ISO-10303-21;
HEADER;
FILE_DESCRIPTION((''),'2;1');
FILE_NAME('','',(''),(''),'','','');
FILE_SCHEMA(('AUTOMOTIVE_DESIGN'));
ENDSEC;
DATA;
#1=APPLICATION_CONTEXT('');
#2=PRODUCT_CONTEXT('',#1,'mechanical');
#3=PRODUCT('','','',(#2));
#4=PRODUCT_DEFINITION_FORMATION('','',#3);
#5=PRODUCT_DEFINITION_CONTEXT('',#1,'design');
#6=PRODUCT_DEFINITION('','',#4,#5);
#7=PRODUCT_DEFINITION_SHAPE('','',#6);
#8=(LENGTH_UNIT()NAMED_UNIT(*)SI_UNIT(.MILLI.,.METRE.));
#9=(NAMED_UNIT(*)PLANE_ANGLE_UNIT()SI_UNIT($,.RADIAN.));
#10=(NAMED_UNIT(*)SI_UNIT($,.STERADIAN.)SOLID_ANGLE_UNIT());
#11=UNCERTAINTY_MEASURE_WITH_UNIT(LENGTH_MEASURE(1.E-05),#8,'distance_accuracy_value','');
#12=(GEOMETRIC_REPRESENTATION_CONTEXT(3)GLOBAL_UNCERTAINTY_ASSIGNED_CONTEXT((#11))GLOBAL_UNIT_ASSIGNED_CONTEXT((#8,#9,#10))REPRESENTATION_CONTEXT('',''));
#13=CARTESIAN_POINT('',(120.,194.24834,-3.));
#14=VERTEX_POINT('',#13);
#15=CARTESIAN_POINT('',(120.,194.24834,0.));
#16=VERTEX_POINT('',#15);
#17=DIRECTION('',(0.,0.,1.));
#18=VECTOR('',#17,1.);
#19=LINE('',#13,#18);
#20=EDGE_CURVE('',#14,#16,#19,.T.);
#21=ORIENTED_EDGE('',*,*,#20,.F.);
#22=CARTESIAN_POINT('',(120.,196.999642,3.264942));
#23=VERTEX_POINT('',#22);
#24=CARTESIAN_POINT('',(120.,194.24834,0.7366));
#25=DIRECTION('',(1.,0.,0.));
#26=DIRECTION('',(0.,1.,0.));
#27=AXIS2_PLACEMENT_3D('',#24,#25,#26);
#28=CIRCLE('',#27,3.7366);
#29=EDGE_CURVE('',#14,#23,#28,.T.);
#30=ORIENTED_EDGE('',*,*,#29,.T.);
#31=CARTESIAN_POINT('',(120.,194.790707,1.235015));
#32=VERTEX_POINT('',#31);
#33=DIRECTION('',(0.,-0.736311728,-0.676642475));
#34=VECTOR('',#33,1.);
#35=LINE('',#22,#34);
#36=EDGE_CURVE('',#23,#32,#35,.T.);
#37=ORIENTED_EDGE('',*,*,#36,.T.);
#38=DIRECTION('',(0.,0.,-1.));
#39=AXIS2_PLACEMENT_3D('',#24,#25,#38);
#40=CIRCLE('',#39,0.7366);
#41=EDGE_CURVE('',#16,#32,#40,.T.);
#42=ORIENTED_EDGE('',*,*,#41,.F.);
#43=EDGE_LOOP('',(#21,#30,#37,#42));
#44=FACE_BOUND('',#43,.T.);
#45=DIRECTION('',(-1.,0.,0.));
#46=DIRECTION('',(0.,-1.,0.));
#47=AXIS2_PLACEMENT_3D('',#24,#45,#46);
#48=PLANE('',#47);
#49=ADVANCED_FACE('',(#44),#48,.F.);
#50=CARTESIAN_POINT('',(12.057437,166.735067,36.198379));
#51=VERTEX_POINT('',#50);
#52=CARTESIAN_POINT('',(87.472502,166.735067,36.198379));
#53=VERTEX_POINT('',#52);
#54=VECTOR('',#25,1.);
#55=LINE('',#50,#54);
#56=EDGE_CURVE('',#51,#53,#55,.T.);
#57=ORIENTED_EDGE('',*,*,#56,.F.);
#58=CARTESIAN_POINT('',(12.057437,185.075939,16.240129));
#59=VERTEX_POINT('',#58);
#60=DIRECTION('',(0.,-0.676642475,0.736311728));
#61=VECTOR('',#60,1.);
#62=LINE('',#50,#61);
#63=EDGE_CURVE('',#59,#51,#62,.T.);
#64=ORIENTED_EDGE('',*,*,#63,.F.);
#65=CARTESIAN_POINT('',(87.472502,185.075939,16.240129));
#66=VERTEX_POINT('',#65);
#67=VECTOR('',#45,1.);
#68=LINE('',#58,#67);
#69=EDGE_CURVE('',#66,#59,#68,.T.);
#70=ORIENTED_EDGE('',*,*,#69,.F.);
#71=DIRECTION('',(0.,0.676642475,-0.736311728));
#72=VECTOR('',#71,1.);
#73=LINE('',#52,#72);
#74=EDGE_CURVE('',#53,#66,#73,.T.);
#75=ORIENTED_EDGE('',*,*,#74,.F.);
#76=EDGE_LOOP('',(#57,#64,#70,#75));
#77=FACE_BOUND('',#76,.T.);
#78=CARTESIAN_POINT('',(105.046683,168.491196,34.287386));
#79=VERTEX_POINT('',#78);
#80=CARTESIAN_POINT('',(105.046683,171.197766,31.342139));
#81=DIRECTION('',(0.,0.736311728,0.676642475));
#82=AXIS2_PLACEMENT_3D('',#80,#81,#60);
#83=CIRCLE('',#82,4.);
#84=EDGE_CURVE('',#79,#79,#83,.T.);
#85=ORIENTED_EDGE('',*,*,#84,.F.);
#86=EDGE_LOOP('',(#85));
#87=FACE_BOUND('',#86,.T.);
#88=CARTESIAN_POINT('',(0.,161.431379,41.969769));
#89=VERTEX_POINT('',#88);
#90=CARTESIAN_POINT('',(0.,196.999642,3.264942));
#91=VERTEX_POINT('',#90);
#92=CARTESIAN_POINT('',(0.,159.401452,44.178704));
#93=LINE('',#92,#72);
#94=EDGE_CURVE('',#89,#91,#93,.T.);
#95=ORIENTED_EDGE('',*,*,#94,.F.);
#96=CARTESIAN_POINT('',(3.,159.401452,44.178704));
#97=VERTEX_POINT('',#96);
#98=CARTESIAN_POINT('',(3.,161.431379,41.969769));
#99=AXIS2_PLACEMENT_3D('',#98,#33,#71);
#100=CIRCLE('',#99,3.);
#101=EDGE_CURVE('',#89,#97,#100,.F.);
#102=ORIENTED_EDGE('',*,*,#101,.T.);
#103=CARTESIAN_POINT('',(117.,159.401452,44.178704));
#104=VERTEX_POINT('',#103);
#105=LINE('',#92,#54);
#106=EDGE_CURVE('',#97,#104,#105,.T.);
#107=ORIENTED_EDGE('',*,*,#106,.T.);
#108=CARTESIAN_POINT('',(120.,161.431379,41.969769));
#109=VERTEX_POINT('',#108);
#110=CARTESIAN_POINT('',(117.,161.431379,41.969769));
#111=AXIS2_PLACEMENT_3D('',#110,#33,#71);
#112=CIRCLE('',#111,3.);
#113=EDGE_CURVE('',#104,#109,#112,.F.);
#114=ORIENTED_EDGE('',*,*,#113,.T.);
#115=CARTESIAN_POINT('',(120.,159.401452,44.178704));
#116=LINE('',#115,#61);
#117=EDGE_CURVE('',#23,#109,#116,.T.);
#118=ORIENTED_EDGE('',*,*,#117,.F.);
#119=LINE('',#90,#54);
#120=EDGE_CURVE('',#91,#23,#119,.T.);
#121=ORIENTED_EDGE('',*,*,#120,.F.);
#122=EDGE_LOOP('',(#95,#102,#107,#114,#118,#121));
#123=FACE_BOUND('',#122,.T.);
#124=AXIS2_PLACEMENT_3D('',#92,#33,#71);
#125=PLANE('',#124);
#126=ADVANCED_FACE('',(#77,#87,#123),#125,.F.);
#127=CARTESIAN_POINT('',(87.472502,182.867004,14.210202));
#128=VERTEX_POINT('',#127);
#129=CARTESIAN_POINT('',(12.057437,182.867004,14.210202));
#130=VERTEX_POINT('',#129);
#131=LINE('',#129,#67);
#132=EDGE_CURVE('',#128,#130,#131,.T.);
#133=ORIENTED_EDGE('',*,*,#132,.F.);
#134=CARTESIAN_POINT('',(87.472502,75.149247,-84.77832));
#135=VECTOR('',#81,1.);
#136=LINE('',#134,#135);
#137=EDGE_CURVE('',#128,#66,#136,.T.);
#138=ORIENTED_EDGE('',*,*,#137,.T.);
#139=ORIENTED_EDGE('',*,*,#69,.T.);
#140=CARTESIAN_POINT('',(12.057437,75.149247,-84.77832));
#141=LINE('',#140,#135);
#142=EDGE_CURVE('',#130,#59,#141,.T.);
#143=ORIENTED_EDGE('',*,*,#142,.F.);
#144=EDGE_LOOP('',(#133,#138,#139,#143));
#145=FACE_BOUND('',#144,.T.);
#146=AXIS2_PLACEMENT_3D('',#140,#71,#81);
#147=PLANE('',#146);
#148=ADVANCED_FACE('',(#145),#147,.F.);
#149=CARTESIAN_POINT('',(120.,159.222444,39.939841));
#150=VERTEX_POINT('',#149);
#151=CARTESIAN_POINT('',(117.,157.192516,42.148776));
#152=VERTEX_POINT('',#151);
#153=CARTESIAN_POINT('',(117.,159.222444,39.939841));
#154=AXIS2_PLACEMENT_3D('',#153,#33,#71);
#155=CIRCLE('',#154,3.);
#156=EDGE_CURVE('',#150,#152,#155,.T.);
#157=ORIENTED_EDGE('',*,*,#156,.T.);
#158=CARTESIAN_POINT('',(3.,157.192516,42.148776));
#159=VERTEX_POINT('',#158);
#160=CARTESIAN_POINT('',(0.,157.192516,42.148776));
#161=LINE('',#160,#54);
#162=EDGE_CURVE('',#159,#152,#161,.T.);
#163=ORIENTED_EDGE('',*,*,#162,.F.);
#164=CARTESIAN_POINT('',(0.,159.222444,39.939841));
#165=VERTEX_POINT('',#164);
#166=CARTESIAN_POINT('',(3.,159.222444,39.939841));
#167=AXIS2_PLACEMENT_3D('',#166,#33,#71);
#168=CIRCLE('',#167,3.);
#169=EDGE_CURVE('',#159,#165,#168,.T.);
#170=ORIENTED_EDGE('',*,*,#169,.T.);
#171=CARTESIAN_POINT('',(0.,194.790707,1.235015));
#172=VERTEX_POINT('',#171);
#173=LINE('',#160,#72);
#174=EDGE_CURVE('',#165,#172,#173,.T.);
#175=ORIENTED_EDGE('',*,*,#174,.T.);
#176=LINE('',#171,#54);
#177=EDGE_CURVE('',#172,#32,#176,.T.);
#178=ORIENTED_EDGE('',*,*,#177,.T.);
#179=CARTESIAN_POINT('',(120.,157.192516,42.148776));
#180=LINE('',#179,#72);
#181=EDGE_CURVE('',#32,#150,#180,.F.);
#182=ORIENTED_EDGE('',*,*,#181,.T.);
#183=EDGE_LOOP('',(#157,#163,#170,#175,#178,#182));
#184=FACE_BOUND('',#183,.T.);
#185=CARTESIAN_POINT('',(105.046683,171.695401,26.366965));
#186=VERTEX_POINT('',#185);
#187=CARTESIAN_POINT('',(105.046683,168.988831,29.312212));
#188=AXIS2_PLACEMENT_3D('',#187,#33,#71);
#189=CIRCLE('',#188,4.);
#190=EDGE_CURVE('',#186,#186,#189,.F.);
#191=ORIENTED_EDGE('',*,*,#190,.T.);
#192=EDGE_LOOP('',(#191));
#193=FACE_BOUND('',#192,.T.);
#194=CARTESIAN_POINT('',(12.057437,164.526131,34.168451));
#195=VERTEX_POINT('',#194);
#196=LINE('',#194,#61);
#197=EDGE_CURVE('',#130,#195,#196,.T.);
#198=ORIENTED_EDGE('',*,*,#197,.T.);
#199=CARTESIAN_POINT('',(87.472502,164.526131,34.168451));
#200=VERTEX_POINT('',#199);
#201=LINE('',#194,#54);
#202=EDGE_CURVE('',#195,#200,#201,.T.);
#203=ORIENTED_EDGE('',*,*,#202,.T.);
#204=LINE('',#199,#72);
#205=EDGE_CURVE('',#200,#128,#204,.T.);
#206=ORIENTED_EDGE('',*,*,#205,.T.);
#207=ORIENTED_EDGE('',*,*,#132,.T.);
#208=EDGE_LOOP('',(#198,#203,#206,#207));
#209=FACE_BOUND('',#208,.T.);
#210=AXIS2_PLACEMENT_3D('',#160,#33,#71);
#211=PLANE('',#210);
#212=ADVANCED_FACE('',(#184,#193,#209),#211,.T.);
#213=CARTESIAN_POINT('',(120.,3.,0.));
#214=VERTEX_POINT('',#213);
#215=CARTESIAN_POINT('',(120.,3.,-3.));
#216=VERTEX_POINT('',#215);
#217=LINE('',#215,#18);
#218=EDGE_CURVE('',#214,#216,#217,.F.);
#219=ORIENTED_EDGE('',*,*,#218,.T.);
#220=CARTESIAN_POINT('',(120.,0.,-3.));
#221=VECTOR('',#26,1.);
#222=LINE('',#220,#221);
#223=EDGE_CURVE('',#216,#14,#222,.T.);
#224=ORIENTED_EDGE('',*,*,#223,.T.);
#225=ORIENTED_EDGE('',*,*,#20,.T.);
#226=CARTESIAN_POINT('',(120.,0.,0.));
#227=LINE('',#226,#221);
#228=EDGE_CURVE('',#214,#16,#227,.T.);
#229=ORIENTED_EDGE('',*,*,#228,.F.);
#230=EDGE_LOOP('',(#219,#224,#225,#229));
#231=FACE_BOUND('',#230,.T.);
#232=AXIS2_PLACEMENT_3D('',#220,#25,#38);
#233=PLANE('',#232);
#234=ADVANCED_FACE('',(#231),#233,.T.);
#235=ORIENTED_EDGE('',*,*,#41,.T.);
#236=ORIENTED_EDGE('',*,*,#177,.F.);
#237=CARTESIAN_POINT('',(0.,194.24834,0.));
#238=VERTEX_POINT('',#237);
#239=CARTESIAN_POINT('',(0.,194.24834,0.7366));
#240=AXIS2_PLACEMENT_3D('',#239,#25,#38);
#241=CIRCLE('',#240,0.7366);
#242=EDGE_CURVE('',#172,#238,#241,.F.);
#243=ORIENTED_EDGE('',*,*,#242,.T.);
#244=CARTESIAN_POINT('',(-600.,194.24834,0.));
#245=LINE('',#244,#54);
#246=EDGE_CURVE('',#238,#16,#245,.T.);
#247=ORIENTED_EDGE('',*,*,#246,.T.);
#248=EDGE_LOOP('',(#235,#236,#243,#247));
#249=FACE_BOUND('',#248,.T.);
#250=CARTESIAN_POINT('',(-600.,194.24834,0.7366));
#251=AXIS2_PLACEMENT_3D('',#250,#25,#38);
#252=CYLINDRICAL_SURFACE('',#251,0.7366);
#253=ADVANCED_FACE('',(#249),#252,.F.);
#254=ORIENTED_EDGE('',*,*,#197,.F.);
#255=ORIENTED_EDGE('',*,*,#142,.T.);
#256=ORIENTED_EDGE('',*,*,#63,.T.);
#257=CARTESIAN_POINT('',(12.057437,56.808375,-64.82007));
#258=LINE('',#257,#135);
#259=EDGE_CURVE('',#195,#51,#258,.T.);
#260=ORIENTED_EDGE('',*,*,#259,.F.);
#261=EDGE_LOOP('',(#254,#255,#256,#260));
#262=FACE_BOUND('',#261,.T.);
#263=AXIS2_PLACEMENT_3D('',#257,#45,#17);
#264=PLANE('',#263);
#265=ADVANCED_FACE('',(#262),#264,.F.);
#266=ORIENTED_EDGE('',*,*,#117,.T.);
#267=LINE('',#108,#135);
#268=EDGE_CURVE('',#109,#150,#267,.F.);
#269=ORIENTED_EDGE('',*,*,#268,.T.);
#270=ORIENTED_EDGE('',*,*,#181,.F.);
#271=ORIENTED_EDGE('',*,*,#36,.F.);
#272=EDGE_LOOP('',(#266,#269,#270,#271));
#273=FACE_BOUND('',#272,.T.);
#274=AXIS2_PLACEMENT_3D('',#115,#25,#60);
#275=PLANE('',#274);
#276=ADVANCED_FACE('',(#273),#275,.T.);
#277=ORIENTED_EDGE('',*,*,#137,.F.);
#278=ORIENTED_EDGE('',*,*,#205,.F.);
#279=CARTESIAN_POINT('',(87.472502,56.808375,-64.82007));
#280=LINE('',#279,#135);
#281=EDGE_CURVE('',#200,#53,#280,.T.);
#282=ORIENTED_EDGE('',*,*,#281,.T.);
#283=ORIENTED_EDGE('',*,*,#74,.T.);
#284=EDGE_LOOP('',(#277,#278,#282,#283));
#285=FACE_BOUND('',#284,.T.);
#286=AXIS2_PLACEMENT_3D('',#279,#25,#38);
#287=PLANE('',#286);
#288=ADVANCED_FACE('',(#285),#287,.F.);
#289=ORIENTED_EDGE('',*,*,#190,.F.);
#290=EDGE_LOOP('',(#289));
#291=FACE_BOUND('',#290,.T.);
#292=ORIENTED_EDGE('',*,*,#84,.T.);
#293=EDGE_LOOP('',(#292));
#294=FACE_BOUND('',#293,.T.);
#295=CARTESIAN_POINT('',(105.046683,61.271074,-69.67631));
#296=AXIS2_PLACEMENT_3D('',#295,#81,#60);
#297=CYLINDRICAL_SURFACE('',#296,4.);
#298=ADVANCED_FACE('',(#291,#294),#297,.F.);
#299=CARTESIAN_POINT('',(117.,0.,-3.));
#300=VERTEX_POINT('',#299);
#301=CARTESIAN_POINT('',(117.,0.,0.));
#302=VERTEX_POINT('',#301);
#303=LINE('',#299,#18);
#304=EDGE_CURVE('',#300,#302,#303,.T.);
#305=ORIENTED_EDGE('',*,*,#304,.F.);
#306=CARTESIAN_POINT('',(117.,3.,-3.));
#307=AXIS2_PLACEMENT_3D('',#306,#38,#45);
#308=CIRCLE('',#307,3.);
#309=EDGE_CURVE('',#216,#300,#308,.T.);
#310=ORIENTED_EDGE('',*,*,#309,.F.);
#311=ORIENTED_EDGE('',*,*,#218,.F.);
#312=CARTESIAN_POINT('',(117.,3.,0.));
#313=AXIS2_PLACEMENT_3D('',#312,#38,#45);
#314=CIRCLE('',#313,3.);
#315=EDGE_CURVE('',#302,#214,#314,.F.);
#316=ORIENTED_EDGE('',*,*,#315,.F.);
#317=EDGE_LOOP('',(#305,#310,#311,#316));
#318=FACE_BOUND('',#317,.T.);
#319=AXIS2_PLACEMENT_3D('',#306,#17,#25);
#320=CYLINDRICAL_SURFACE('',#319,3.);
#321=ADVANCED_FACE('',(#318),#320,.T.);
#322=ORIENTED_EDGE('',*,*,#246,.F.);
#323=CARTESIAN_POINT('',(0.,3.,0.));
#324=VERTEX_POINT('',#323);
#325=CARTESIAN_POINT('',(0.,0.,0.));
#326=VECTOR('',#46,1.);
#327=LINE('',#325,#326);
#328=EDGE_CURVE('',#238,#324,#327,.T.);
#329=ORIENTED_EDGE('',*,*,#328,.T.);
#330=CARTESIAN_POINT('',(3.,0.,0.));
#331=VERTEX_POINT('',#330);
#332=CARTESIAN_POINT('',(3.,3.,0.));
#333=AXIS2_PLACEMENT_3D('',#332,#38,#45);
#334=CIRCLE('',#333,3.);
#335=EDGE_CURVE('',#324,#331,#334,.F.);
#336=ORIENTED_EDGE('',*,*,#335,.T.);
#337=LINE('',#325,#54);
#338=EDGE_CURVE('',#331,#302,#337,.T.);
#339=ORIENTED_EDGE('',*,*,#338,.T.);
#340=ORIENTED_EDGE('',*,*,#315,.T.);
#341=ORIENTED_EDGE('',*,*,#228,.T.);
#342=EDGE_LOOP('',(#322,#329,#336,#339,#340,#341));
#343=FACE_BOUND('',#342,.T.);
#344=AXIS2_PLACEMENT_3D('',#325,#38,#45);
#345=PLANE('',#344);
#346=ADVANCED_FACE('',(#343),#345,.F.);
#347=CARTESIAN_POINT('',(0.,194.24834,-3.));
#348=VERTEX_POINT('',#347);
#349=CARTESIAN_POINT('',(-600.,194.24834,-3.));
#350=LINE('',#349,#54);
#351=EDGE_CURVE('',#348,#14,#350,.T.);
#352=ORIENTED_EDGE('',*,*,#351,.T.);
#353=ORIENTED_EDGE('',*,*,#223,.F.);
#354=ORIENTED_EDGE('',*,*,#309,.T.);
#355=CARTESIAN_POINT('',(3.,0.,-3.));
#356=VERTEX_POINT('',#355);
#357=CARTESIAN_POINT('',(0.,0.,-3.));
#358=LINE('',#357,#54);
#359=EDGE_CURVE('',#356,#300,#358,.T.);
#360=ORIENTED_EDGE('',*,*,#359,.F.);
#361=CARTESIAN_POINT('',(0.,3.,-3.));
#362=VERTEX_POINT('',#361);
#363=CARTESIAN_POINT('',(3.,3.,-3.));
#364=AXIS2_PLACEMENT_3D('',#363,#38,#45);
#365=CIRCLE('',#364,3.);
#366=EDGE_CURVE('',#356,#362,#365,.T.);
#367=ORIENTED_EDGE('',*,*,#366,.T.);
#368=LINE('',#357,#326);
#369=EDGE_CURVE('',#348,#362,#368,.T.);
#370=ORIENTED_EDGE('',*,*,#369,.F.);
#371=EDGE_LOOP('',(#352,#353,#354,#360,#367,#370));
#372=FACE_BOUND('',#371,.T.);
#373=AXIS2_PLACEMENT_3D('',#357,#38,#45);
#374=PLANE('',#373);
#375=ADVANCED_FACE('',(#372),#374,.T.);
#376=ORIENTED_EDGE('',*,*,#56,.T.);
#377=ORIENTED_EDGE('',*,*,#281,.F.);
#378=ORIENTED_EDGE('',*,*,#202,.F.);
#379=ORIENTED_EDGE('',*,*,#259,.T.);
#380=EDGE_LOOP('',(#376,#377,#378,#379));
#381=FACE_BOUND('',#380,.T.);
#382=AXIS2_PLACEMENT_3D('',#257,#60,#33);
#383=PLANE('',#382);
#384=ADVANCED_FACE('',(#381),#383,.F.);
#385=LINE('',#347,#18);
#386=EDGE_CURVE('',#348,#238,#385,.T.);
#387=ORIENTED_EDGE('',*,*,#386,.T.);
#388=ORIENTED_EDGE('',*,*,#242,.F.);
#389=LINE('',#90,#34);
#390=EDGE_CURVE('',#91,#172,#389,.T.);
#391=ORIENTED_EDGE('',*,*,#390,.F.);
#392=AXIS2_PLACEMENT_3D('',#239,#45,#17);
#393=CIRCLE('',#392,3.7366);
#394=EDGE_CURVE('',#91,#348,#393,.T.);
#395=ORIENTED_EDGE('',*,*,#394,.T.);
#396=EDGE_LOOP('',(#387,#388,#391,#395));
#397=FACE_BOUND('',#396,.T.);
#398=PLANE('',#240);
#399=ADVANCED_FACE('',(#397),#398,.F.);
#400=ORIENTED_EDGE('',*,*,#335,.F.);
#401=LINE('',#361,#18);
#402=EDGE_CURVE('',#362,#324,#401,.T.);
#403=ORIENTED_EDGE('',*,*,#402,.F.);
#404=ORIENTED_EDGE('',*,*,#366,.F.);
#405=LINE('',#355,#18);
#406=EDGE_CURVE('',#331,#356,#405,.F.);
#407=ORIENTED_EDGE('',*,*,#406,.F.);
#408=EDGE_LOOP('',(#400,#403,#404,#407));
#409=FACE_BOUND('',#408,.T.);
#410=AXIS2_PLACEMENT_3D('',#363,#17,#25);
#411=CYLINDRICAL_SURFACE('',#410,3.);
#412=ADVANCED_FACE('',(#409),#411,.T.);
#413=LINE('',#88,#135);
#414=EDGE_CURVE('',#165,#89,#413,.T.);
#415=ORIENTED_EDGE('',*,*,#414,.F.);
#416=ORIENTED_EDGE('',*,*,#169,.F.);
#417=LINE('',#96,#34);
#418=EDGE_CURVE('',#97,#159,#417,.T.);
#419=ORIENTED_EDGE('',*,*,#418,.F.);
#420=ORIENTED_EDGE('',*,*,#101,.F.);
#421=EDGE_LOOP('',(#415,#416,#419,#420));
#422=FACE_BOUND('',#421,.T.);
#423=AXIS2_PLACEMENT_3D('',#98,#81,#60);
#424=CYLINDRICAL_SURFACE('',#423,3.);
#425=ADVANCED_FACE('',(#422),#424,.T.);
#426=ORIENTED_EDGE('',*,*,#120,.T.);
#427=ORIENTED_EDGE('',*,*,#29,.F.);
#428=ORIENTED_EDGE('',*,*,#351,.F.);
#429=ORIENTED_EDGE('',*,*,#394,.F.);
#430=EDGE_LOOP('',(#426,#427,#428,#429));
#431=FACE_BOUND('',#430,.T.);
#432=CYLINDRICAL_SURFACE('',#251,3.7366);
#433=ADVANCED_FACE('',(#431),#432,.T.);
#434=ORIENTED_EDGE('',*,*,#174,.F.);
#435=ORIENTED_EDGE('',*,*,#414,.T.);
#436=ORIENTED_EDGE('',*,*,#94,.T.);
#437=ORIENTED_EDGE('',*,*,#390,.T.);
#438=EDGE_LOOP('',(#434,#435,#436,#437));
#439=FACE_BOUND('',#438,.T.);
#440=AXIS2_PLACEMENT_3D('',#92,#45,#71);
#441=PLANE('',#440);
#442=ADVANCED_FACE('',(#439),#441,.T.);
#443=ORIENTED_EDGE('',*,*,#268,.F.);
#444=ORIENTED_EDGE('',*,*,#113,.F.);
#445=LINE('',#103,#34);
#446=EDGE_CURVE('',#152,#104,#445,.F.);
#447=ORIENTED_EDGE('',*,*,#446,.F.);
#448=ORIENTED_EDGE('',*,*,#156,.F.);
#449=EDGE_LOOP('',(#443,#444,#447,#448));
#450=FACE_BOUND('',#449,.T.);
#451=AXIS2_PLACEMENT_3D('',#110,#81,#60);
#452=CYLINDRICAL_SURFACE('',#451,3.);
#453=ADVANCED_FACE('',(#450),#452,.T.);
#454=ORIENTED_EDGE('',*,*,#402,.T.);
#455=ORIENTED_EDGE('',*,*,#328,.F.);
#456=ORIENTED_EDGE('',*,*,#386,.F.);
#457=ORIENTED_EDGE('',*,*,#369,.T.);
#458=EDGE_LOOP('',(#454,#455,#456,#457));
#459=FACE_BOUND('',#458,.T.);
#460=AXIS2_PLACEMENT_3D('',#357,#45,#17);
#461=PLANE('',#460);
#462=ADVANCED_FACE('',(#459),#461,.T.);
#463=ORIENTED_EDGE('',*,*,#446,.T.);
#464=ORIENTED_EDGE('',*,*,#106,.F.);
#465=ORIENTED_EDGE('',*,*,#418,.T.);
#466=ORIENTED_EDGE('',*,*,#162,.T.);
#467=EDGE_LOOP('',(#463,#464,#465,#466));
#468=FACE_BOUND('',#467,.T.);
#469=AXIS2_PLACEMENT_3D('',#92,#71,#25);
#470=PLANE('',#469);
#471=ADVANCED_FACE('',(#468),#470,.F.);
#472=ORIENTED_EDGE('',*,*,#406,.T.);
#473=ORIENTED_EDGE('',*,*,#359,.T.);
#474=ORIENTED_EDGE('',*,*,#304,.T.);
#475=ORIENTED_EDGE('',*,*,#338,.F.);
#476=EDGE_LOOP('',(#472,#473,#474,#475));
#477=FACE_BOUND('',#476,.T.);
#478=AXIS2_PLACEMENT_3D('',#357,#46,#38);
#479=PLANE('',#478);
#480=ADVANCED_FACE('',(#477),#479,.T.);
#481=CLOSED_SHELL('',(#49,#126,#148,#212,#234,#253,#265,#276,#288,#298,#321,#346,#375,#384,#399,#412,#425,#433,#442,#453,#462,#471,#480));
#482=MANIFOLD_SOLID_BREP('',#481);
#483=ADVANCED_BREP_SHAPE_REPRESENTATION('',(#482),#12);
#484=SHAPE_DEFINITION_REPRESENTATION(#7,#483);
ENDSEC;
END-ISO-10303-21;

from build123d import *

# Parameters (mm, degrees)
SZKIC1_W                   = 120
SZKIC1_H                   = 200
ODGI_CIE_BAZOWE1_DEPTH     = 3
ODGI_CIE_DOOKOLNE1_DEPTH   = 120
ODGI_CIE_DOOKOLNE1_2_DEPTH = 120
WYTNIJ_WYCI_GNI_CIE1_REACH = 193.554
SZKIC7_R                   = 4
SZKIC7_W                   = 75.41506457
SZKIC7_H                   = 27.105706619
ZAOKR_GLENIE1_R            = 3


# Read off the part's stored shape, not the designer's step: Odgięcie dookolne1
# Sheet-metal steps are written as plain solids
with BuildPart() as part:
    # Szkic1 → Odgięcie bazowe1 (new body)
    with BuildSketch(Plane.XY):
        with Locations((60, 100)):
            Rectangle(SZKIC1_W, SZKIC1_H)
    extrude(amount=-ODGI_CIE_BAZOWE1_DEPTH)

    # Odgięcie dookolne1 outline → Odgięcie dookolne1 (cut)
    with BuildSketch(Plane.YZ):
        with BuildLine():
            Line((200, 0), (197.911617043, 0))
            ThreePointArc((197.911617043, 0), (196.615806823, -2.154295979), (194.248339822, -3))
            Line((194.248339822, -3), (200, -3))
            Line((200, -3), (200, 0))
        make_face()
    extrude(amount=ODGI_CIE_DOOKOLNE1_DEPTH, mode=Mode.SUBTRACT)

    # Odgi_cie dookolne1 2 outline → Odgi_cie dookolne1 2 (add)
    with BuildSketch(Plane.YZ):
        with BuildLine():
            Line((159.401451516, 44.178703704), (157.19251633, 42.14877628))
            Line((157.19251633, 42.14877628), (194.790707041, 1.235014847))
            ThreePointArc((194.790707041, 1.235014847), (194.922769928, 0.440418313), (194.248339822, 0))
            Line((194.248339822, 0), (197.911617043, 0))
            ThreePointArc((197.911617043, 0), (197.847182685, 1.74184107), (196.999642226, 3.264942271))
            Line((196.999642226, 3.264942271), (159.401451516, 44.178703704))
        make_face()
    extrude(amount=ODGI_CIE_DOOKOLNE1_2_DEPTH)

    # Szkic7 → Wytnij-wyciągnięcie1 (cut, up to next)
    with BuildSketch(Plane(origin=(0, 108.430992275, 99.643958017), x_dir=(1, 0, 0), z_dir=(0, 0.7363117283974429, 0.6766424747415508)), mode=Mode.PRIVATE) as wytnij_wyci_gni_cie1_sk1:
        with Locations(Location((105.046682515, 92.762095307, 0), (0, 0, 270))):
            Circle(SZKIC7_R)
    wytnij_wyci_gni_cie1_tool1 = extrude(wytnij_wyci_gni_cie1_sk1.sketch, amount=-WYTNIJ_WYCI_GNI_CIE1_REACH, mode=Mode.PRIVATE) & part.part
    # Szkic7 → Wytnij-wyciągnięcie1 (cut, up to next)
    with BuildSketch(Plane(origin=(0, 108.430992275, 99.643958017), x_dir=(1, 0, 0), z_dir=(0, 0.7363117283974429, 0.6766424747415508)), mode=Mode.PRIVATE) as wytnij_wyci_gni_cie1_sk2:
        with Locations((49.764969339, 99.719590592)):
            Rectangle(SZKIC7_W, SZKIC7_H)
    wytnij_wyci_gni_cie1_tool2 = extrude(wytnij_wyci_gni_cie1_sk2.sketch, amount=-WYTNIJ_WYCI_GNI_CIE1_REACH, mode=Mode.PRIVATE) & part.part
    add(wytnij_wyci_gni_cie1_tool1.solids().sort_by_distance((105.046683, 171.197766, 31.342139))[0], mode=Mode.SUBTRACT)
    add(wytnij_wyci_gni_cie1_tool2.solids().sort_by_distance((49.764969, 175.905503, 26.219254))[0], mode=Mode.SUBTRACT)

    # Zaokrąglenie1
    zaokr_glenie1_edges = [part.edges().sort_by_distance(p)[0] for p in [
        (0, 158.296983923, 43.163739992),
        (120, 158.296983923, 43.163739992),
        (120, 0, -1.5),
        (0, 0, -1.5),
    ]]
    fillet(zaokr_glenie1_edges, radius=ZAOKR_GLENIE1_R)


solid = part.part
